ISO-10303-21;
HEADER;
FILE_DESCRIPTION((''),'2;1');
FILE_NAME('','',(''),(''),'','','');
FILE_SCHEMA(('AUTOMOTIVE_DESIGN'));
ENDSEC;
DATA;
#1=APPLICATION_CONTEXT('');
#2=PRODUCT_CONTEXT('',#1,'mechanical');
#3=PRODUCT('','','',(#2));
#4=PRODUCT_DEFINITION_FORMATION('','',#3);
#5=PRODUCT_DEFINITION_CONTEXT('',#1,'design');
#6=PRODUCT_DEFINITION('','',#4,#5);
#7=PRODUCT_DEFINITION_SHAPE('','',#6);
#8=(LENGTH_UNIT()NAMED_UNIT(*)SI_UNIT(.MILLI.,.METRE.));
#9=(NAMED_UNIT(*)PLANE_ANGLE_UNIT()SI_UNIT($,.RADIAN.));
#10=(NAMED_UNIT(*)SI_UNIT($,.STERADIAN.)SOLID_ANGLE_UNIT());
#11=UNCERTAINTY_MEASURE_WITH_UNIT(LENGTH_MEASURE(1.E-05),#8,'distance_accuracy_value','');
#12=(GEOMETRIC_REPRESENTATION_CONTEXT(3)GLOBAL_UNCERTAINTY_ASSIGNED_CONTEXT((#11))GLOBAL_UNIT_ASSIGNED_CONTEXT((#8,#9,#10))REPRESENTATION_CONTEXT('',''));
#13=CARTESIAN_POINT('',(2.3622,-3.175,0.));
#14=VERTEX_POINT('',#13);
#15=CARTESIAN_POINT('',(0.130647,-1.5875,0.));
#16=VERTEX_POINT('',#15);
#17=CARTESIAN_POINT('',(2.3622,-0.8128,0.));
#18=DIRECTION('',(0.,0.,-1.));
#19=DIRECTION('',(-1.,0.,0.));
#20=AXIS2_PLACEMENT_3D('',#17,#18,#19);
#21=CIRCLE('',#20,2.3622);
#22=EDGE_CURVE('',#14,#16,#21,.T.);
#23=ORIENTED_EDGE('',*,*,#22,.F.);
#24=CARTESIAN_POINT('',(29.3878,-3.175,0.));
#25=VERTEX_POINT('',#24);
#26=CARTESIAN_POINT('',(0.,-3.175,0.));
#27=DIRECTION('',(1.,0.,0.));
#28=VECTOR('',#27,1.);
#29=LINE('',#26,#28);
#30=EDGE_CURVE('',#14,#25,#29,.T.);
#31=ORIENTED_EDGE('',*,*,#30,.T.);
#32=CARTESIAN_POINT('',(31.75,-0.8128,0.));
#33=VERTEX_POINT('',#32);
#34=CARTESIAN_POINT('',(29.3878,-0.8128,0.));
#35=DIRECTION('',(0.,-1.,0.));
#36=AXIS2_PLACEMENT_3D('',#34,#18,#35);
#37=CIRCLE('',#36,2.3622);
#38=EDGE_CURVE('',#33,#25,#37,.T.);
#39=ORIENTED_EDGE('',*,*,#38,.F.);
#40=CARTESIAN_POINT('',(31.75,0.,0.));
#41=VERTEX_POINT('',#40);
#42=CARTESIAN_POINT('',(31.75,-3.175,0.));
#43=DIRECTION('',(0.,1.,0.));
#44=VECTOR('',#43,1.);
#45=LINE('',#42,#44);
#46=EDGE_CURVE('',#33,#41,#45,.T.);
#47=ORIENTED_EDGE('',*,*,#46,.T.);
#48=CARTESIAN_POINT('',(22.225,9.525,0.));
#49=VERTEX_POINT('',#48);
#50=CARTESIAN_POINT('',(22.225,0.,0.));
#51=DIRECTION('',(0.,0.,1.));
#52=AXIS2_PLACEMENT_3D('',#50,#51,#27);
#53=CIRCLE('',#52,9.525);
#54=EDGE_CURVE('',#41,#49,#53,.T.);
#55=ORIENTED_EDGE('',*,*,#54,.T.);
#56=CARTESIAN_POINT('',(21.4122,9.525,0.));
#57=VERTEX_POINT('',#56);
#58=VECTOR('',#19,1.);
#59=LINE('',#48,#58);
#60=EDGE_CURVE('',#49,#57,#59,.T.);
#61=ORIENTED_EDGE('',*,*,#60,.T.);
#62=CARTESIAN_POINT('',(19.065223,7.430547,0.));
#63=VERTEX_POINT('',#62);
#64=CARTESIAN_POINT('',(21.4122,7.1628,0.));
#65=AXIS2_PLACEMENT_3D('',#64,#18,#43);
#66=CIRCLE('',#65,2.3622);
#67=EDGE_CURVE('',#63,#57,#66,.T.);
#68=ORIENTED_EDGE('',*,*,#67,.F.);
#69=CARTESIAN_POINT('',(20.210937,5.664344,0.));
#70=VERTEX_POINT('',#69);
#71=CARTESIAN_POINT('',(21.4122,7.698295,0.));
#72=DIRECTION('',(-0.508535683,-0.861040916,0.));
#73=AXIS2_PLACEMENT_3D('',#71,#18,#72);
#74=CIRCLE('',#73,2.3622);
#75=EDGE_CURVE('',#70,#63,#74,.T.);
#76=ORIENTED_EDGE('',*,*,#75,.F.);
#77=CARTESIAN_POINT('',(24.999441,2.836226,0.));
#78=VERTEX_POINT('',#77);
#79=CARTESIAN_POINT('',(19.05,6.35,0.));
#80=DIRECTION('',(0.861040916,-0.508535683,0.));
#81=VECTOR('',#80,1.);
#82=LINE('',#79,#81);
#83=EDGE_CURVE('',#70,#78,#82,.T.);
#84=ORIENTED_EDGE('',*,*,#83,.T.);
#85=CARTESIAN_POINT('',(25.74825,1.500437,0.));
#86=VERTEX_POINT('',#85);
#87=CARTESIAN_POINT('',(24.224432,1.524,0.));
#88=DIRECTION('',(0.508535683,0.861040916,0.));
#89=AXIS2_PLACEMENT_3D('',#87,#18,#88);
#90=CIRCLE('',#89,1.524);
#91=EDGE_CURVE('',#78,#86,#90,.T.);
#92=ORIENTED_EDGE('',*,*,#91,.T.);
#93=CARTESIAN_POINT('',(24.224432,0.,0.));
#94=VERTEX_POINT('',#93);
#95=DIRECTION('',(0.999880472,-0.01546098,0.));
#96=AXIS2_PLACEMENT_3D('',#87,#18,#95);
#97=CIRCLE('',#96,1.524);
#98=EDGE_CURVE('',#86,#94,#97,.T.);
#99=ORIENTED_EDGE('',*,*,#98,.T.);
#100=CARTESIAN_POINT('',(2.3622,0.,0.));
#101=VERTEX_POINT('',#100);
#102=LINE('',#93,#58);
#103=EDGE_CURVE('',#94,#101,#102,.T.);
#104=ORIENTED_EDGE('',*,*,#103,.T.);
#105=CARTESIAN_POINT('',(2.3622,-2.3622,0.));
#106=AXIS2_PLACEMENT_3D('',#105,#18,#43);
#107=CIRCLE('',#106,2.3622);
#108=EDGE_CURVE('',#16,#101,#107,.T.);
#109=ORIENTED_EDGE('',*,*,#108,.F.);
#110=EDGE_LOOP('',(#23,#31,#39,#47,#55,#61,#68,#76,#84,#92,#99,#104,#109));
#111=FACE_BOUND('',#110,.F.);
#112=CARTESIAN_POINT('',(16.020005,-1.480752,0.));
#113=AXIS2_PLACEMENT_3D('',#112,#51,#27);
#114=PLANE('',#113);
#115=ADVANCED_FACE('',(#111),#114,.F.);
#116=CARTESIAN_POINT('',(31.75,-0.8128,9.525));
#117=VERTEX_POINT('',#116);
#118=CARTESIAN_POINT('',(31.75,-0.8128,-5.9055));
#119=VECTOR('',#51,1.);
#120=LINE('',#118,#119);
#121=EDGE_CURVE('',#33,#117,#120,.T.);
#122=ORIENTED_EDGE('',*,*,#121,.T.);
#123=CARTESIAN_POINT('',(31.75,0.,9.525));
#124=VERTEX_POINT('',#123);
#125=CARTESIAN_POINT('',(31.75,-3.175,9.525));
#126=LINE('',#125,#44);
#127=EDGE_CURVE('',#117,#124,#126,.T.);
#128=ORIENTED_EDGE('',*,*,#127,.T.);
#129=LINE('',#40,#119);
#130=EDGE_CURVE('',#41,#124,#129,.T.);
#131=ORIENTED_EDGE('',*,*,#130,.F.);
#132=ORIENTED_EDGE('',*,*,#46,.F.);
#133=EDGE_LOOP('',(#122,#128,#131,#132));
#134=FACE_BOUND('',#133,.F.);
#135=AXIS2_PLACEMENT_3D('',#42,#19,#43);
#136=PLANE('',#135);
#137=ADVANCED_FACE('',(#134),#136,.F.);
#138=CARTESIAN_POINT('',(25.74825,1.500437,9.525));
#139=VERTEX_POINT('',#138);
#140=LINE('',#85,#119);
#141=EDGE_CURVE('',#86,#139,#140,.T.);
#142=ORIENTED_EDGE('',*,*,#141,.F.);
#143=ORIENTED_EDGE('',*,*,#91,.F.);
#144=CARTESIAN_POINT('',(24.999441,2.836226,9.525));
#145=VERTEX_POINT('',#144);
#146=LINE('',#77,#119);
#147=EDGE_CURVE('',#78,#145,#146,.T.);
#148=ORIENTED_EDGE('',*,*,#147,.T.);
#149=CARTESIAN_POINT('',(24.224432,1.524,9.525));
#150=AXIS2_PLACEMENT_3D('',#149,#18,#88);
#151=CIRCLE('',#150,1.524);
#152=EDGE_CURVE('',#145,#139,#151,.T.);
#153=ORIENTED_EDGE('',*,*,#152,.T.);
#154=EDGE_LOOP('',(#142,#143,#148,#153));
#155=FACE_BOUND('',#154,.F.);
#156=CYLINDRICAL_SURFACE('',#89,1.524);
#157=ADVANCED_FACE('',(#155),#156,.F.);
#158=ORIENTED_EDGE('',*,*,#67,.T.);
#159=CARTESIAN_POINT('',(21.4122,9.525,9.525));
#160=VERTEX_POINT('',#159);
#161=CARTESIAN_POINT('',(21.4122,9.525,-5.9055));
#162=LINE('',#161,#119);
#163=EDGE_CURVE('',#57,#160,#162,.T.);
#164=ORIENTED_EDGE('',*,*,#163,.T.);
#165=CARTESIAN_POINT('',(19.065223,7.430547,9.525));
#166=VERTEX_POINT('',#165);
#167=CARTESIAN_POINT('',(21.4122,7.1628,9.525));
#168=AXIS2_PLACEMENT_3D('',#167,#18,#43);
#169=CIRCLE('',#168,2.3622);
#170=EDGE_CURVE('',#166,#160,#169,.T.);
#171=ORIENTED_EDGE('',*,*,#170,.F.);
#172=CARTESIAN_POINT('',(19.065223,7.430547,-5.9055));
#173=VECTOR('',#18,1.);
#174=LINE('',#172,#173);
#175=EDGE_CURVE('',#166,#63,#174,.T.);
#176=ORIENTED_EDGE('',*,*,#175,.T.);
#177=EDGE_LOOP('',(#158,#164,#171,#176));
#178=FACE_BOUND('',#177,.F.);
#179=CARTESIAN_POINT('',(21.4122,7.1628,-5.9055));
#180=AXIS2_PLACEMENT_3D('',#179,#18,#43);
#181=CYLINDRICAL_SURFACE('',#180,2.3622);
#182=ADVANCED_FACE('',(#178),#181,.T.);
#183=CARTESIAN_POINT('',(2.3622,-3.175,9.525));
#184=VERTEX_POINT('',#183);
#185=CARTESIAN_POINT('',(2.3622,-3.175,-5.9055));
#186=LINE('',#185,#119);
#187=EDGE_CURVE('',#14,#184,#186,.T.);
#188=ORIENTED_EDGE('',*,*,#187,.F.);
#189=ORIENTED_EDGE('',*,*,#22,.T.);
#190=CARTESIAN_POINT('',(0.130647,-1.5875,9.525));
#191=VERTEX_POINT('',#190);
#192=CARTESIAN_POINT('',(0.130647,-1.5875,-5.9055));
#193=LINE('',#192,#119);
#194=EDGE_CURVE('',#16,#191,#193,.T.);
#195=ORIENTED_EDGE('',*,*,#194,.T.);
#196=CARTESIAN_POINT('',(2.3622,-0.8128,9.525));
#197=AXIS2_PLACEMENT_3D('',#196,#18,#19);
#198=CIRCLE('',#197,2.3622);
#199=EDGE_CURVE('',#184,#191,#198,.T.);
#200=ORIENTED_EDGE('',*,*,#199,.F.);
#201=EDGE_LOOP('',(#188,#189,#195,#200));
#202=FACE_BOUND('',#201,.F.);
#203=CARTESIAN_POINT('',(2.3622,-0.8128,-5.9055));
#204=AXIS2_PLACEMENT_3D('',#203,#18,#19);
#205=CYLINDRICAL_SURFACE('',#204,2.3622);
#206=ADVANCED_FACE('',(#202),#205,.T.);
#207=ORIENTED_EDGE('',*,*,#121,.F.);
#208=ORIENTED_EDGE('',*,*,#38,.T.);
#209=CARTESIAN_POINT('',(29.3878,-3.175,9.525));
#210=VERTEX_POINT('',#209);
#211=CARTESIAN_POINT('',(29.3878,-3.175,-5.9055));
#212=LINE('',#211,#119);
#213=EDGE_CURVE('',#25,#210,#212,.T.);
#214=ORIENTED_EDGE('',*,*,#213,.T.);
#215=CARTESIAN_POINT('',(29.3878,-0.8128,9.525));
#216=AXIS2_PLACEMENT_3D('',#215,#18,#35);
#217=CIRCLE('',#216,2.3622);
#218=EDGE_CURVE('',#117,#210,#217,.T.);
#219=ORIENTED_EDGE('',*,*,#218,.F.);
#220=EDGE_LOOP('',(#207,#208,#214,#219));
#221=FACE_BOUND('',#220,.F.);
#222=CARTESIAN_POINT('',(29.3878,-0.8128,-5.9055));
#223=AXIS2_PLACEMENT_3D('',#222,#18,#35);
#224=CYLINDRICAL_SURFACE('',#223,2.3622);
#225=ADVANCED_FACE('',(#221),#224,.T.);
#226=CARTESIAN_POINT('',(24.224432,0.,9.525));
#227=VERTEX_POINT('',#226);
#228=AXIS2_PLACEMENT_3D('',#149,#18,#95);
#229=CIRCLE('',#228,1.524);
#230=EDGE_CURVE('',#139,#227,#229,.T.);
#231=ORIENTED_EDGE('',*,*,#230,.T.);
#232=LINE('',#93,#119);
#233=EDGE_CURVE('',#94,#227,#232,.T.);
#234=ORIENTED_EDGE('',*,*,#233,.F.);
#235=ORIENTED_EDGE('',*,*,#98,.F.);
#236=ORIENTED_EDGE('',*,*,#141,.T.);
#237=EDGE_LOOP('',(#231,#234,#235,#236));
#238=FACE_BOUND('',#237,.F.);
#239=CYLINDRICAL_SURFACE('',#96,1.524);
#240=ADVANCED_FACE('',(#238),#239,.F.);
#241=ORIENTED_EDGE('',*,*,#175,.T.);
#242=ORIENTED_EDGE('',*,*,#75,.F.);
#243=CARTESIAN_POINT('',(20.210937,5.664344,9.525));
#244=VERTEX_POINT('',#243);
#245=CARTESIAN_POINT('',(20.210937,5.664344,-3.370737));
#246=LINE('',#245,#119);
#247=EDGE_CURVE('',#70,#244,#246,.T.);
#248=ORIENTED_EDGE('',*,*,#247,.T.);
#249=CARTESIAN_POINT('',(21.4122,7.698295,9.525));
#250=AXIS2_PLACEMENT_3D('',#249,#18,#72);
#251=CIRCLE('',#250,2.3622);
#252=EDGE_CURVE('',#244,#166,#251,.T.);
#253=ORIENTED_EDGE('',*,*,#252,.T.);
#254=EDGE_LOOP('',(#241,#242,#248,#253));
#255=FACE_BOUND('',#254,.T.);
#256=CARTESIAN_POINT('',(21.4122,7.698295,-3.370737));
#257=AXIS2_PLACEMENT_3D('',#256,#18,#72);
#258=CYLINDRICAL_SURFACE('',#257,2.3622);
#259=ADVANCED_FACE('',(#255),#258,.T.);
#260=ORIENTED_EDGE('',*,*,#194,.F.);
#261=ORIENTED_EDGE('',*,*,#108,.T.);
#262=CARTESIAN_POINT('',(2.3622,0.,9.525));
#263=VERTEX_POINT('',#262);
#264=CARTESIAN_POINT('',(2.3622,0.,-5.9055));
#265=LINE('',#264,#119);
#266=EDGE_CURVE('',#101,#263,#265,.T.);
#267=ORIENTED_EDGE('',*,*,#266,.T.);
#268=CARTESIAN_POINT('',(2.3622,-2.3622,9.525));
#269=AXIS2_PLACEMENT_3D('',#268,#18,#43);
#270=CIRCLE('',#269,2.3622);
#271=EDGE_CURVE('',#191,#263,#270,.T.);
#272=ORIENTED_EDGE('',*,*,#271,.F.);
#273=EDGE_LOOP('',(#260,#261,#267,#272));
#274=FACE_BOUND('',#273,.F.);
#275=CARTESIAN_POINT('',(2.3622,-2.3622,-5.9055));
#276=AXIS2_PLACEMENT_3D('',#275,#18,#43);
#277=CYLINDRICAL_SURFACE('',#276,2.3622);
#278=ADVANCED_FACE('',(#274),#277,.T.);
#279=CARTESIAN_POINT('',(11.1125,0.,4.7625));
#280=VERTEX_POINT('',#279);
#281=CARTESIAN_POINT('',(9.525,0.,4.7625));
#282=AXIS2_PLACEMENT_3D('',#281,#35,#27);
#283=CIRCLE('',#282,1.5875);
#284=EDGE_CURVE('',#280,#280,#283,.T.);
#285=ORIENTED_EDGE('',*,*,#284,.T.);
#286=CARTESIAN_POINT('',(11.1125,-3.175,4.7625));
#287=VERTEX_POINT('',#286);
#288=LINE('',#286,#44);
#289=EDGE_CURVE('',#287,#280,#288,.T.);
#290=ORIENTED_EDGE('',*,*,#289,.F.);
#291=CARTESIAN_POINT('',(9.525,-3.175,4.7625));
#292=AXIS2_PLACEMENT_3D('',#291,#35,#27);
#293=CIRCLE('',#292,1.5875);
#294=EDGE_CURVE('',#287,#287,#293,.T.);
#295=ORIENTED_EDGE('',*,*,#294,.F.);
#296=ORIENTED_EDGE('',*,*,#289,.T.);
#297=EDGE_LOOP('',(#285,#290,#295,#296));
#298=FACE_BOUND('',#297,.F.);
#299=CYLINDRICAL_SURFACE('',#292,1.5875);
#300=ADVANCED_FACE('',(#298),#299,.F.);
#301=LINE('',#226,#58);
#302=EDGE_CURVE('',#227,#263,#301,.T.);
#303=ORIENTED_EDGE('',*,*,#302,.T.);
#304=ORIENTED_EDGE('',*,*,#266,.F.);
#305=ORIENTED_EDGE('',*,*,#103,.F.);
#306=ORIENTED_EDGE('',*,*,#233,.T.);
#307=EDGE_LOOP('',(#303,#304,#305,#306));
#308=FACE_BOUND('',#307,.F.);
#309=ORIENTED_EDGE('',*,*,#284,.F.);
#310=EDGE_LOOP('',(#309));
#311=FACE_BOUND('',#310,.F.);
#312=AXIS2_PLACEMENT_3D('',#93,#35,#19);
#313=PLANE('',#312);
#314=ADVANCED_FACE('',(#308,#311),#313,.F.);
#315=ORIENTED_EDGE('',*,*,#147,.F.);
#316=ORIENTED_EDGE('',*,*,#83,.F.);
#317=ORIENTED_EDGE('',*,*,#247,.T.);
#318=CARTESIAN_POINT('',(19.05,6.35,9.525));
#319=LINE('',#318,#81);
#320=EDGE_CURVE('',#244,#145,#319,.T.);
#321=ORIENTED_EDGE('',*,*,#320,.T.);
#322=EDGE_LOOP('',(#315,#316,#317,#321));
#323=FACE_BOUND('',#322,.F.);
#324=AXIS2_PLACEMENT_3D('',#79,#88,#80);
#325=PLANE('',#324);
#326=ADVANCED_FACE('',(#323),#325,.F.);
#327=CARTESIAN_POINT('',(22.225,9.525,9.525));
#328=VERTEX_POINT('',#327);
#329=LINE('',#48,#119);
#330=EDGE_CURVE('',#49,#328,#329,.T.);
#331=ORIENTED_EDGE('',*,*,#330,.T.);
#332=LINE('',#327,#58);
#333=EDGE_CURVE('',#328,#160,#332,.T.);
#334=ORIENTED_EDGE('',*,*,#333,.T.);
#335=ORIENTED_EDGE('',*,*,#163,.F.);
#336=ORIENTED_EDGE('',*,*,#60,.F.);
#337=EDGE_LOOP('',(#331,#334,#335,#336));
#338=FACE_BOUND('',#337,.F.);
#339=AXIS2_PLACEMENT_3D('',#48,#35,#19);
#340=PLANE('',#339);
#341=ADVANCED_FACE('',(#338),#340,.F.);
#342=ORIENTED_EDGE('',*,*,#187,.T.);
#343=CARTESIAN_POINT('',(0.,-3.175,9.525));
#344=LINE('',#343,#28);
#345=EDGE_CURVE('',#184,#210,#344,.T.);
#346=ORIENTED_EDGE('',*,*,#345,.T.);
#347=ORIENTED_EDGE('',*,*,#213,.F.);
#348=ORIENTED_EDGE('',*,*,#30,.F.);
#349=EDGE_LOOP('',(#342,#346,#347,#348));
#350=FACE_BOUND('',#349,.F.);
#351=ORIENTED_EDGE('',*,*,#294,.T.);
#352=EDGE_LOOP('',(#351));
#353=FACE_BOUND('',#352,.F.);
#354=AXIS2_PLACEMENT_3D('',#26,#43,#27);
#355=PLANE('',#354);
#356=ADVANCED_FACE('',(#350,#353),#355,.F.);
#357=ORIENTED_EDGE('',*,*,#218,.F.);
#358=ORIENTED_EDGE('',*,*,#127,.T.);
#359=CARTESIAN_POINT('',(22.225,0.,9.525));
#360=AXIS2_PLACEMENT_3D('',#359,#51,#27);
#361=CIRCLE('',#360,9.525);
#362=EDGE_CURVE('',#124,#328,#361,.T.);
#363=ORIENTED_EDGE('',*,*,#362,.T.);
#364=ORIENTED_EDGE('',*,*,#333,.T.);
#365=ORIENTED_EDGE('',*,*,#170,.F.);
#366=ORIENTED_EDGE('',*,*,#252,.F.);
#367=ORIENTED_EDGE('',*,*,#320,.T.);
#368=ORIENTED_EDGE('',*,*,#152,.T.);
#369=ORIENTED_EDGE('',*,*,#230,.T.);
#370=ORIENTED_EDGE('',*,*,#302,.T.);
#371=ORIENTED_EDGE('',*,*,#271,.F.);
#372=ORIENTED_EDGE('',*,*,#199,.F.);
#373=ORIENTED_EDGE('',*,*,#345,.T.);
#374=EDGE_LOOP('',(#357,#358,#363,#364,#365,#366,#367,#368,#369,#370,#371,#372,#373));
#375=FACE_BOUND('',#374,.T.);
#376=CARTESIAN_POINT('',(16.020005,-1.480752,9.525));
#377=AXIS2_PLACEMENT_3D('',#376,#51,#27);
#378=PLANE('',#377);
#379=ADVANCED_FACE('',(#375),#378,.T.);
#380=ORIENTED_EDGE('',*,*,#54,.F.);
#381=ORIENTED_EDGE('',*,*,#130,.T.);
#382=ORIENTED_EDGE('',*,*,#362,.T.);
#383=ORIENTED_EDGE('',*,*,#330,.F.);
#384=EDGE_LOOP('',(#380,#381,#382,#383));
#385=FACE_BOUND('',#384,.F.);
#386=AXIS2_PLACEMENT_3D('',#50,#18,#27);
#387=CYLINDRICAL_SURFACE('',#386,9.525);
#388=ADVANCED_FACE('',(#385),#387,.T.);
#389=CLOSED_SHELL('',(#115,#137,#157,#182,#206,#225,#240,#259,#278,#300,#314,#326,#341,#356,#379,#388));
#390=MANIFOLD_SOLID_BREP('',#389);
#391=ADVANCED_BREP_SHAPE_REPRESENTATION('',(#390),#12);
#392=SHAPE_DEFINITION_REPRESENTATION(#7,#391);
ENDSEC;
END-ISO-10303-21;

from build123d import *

# Parameters (mm, degrees)
F1_DEPTH    = 9.525
F2_R        = 1.5875
F3_DEPTH    = 12.701
F4_T1_DEPTH = 21.336
F4_T3_DEPTH = 16.266474116


# Not quite as in the source:
# - a fillet or chamfer that OpenCascade refuses, or shapes differently, is made with other operations: its cross-section is extruded or revolved along the edge and cut away or added


with BuildPart() as f1:
    # F0 (on Top) → F1 (new body)
    with BuildSketch(Plane.XY):
        with BuildLine():
            Line((24.2244322948, 0), (0, 0))
            Line((0, 0), (0, -3.175))
            Line((0, -3.175), (31.75, -3.175))
            Line((31.75, -3.175), (31.75, 0))
            Line((31.75, 0), (25.748250134, 1.5004374665))
            ThreePointArc((25.748250134, 1.5004374665), (25.2936999645, 0.4380706052), (24.2244322948, 0))
        make_face()
        with BuildLine():
            ThreePointArc((24.9994406757, 2.8362263561), (25.5538056385, 2.2692130656), (25.748250134, 1.5004374665))
            Line((25.748250134, 1.5004374665), (31.75, 0))
            ThreePointArc((31.75, 0), (28.9601920908, 6.7351920908), (22.225, 9.525))
            Line((22.225, 9.525), (19.05, 9.525))
            Line((19.05, 9.525), (19.05, 6.35))
            Line((19.05, 6.35), (24.9994406757, 2.8362263561))
        make_face()
    extrude(amount=F1_DEPTH)

    # F2 (on face) → F3 (cut, through all)
    with BuildSketch(Plane.XZ.offset(3.175)):
        with Locations((9.525, 4.7625)):
            Circle(F2_R)
    extrude(amount=-F3_DEPTH, mode=Mode.SUBTRACT)

    # F4: fillet of radius 2.3622 on 5 edges, made by hand

    # F4_s2 → F4_t1 (cut)
    with BuildSketch(Plane.XY.offset(-5.9055)):
        with BuildLine():
            ThreePointArc((29.3878, -3.175), (31.0581276385, -2.4831276385), (31.75, -0.8128))
            Line((31.75, -0.8128), (31.75, -3.175))
            Line((31.75, -3.175), (29.3878, -3.175))
        make_face()
        with BuildLine():
            ThreePointArc((21.4122, 9.525), (19.7418723615, 8.8331276385), (19.05, 7.1628))
            Line((19.05, 7.1628), (19.05, 9.525))
            Line((19.05, 9.525), (21.4122, 9.525))
        make_face()
        with BuildLine():
            ThreePointArc((0, -0.8128), (0.6918723615, -2.4831276385), (2.3622, -3.175))
            Line((2.3622, -3.175), (0, -3.175))
            Line((0, -3.175), (0, -0.8128))
        make_face()
        with BuildLine():
            ThreePointArc((2.3622, 0), (0.6918723615, -0.6918723615), (0, -2.3622))
            Line((0, -2.3622), (0, 0))
            Line((0, 0), (2.3622, 0))
        make_face()
    extrude(amount=F4_T1_DEPTH, mode=Mode.SUBTRACT)

    # F4_s4 → F4_t3 (cut)
    with BuildSketch(Plane.XY.offset(-3.370737058)):
        with BuildLine():
            ThreePointArc((20.2109370097, 5.6643439713), (19.3606624942, 6.5273197158), (19.05, 7.6982948232))
            Line((19.05, 7.6982948232), (19.05, 6.35))
            Line((19.05, 6.35), (20.2109370097, 5.6643439713))
        make_face()
    extrude(amount=F4_T3_DEPTH, mode=Mode.SUBTRACT)


solid = f1.part
